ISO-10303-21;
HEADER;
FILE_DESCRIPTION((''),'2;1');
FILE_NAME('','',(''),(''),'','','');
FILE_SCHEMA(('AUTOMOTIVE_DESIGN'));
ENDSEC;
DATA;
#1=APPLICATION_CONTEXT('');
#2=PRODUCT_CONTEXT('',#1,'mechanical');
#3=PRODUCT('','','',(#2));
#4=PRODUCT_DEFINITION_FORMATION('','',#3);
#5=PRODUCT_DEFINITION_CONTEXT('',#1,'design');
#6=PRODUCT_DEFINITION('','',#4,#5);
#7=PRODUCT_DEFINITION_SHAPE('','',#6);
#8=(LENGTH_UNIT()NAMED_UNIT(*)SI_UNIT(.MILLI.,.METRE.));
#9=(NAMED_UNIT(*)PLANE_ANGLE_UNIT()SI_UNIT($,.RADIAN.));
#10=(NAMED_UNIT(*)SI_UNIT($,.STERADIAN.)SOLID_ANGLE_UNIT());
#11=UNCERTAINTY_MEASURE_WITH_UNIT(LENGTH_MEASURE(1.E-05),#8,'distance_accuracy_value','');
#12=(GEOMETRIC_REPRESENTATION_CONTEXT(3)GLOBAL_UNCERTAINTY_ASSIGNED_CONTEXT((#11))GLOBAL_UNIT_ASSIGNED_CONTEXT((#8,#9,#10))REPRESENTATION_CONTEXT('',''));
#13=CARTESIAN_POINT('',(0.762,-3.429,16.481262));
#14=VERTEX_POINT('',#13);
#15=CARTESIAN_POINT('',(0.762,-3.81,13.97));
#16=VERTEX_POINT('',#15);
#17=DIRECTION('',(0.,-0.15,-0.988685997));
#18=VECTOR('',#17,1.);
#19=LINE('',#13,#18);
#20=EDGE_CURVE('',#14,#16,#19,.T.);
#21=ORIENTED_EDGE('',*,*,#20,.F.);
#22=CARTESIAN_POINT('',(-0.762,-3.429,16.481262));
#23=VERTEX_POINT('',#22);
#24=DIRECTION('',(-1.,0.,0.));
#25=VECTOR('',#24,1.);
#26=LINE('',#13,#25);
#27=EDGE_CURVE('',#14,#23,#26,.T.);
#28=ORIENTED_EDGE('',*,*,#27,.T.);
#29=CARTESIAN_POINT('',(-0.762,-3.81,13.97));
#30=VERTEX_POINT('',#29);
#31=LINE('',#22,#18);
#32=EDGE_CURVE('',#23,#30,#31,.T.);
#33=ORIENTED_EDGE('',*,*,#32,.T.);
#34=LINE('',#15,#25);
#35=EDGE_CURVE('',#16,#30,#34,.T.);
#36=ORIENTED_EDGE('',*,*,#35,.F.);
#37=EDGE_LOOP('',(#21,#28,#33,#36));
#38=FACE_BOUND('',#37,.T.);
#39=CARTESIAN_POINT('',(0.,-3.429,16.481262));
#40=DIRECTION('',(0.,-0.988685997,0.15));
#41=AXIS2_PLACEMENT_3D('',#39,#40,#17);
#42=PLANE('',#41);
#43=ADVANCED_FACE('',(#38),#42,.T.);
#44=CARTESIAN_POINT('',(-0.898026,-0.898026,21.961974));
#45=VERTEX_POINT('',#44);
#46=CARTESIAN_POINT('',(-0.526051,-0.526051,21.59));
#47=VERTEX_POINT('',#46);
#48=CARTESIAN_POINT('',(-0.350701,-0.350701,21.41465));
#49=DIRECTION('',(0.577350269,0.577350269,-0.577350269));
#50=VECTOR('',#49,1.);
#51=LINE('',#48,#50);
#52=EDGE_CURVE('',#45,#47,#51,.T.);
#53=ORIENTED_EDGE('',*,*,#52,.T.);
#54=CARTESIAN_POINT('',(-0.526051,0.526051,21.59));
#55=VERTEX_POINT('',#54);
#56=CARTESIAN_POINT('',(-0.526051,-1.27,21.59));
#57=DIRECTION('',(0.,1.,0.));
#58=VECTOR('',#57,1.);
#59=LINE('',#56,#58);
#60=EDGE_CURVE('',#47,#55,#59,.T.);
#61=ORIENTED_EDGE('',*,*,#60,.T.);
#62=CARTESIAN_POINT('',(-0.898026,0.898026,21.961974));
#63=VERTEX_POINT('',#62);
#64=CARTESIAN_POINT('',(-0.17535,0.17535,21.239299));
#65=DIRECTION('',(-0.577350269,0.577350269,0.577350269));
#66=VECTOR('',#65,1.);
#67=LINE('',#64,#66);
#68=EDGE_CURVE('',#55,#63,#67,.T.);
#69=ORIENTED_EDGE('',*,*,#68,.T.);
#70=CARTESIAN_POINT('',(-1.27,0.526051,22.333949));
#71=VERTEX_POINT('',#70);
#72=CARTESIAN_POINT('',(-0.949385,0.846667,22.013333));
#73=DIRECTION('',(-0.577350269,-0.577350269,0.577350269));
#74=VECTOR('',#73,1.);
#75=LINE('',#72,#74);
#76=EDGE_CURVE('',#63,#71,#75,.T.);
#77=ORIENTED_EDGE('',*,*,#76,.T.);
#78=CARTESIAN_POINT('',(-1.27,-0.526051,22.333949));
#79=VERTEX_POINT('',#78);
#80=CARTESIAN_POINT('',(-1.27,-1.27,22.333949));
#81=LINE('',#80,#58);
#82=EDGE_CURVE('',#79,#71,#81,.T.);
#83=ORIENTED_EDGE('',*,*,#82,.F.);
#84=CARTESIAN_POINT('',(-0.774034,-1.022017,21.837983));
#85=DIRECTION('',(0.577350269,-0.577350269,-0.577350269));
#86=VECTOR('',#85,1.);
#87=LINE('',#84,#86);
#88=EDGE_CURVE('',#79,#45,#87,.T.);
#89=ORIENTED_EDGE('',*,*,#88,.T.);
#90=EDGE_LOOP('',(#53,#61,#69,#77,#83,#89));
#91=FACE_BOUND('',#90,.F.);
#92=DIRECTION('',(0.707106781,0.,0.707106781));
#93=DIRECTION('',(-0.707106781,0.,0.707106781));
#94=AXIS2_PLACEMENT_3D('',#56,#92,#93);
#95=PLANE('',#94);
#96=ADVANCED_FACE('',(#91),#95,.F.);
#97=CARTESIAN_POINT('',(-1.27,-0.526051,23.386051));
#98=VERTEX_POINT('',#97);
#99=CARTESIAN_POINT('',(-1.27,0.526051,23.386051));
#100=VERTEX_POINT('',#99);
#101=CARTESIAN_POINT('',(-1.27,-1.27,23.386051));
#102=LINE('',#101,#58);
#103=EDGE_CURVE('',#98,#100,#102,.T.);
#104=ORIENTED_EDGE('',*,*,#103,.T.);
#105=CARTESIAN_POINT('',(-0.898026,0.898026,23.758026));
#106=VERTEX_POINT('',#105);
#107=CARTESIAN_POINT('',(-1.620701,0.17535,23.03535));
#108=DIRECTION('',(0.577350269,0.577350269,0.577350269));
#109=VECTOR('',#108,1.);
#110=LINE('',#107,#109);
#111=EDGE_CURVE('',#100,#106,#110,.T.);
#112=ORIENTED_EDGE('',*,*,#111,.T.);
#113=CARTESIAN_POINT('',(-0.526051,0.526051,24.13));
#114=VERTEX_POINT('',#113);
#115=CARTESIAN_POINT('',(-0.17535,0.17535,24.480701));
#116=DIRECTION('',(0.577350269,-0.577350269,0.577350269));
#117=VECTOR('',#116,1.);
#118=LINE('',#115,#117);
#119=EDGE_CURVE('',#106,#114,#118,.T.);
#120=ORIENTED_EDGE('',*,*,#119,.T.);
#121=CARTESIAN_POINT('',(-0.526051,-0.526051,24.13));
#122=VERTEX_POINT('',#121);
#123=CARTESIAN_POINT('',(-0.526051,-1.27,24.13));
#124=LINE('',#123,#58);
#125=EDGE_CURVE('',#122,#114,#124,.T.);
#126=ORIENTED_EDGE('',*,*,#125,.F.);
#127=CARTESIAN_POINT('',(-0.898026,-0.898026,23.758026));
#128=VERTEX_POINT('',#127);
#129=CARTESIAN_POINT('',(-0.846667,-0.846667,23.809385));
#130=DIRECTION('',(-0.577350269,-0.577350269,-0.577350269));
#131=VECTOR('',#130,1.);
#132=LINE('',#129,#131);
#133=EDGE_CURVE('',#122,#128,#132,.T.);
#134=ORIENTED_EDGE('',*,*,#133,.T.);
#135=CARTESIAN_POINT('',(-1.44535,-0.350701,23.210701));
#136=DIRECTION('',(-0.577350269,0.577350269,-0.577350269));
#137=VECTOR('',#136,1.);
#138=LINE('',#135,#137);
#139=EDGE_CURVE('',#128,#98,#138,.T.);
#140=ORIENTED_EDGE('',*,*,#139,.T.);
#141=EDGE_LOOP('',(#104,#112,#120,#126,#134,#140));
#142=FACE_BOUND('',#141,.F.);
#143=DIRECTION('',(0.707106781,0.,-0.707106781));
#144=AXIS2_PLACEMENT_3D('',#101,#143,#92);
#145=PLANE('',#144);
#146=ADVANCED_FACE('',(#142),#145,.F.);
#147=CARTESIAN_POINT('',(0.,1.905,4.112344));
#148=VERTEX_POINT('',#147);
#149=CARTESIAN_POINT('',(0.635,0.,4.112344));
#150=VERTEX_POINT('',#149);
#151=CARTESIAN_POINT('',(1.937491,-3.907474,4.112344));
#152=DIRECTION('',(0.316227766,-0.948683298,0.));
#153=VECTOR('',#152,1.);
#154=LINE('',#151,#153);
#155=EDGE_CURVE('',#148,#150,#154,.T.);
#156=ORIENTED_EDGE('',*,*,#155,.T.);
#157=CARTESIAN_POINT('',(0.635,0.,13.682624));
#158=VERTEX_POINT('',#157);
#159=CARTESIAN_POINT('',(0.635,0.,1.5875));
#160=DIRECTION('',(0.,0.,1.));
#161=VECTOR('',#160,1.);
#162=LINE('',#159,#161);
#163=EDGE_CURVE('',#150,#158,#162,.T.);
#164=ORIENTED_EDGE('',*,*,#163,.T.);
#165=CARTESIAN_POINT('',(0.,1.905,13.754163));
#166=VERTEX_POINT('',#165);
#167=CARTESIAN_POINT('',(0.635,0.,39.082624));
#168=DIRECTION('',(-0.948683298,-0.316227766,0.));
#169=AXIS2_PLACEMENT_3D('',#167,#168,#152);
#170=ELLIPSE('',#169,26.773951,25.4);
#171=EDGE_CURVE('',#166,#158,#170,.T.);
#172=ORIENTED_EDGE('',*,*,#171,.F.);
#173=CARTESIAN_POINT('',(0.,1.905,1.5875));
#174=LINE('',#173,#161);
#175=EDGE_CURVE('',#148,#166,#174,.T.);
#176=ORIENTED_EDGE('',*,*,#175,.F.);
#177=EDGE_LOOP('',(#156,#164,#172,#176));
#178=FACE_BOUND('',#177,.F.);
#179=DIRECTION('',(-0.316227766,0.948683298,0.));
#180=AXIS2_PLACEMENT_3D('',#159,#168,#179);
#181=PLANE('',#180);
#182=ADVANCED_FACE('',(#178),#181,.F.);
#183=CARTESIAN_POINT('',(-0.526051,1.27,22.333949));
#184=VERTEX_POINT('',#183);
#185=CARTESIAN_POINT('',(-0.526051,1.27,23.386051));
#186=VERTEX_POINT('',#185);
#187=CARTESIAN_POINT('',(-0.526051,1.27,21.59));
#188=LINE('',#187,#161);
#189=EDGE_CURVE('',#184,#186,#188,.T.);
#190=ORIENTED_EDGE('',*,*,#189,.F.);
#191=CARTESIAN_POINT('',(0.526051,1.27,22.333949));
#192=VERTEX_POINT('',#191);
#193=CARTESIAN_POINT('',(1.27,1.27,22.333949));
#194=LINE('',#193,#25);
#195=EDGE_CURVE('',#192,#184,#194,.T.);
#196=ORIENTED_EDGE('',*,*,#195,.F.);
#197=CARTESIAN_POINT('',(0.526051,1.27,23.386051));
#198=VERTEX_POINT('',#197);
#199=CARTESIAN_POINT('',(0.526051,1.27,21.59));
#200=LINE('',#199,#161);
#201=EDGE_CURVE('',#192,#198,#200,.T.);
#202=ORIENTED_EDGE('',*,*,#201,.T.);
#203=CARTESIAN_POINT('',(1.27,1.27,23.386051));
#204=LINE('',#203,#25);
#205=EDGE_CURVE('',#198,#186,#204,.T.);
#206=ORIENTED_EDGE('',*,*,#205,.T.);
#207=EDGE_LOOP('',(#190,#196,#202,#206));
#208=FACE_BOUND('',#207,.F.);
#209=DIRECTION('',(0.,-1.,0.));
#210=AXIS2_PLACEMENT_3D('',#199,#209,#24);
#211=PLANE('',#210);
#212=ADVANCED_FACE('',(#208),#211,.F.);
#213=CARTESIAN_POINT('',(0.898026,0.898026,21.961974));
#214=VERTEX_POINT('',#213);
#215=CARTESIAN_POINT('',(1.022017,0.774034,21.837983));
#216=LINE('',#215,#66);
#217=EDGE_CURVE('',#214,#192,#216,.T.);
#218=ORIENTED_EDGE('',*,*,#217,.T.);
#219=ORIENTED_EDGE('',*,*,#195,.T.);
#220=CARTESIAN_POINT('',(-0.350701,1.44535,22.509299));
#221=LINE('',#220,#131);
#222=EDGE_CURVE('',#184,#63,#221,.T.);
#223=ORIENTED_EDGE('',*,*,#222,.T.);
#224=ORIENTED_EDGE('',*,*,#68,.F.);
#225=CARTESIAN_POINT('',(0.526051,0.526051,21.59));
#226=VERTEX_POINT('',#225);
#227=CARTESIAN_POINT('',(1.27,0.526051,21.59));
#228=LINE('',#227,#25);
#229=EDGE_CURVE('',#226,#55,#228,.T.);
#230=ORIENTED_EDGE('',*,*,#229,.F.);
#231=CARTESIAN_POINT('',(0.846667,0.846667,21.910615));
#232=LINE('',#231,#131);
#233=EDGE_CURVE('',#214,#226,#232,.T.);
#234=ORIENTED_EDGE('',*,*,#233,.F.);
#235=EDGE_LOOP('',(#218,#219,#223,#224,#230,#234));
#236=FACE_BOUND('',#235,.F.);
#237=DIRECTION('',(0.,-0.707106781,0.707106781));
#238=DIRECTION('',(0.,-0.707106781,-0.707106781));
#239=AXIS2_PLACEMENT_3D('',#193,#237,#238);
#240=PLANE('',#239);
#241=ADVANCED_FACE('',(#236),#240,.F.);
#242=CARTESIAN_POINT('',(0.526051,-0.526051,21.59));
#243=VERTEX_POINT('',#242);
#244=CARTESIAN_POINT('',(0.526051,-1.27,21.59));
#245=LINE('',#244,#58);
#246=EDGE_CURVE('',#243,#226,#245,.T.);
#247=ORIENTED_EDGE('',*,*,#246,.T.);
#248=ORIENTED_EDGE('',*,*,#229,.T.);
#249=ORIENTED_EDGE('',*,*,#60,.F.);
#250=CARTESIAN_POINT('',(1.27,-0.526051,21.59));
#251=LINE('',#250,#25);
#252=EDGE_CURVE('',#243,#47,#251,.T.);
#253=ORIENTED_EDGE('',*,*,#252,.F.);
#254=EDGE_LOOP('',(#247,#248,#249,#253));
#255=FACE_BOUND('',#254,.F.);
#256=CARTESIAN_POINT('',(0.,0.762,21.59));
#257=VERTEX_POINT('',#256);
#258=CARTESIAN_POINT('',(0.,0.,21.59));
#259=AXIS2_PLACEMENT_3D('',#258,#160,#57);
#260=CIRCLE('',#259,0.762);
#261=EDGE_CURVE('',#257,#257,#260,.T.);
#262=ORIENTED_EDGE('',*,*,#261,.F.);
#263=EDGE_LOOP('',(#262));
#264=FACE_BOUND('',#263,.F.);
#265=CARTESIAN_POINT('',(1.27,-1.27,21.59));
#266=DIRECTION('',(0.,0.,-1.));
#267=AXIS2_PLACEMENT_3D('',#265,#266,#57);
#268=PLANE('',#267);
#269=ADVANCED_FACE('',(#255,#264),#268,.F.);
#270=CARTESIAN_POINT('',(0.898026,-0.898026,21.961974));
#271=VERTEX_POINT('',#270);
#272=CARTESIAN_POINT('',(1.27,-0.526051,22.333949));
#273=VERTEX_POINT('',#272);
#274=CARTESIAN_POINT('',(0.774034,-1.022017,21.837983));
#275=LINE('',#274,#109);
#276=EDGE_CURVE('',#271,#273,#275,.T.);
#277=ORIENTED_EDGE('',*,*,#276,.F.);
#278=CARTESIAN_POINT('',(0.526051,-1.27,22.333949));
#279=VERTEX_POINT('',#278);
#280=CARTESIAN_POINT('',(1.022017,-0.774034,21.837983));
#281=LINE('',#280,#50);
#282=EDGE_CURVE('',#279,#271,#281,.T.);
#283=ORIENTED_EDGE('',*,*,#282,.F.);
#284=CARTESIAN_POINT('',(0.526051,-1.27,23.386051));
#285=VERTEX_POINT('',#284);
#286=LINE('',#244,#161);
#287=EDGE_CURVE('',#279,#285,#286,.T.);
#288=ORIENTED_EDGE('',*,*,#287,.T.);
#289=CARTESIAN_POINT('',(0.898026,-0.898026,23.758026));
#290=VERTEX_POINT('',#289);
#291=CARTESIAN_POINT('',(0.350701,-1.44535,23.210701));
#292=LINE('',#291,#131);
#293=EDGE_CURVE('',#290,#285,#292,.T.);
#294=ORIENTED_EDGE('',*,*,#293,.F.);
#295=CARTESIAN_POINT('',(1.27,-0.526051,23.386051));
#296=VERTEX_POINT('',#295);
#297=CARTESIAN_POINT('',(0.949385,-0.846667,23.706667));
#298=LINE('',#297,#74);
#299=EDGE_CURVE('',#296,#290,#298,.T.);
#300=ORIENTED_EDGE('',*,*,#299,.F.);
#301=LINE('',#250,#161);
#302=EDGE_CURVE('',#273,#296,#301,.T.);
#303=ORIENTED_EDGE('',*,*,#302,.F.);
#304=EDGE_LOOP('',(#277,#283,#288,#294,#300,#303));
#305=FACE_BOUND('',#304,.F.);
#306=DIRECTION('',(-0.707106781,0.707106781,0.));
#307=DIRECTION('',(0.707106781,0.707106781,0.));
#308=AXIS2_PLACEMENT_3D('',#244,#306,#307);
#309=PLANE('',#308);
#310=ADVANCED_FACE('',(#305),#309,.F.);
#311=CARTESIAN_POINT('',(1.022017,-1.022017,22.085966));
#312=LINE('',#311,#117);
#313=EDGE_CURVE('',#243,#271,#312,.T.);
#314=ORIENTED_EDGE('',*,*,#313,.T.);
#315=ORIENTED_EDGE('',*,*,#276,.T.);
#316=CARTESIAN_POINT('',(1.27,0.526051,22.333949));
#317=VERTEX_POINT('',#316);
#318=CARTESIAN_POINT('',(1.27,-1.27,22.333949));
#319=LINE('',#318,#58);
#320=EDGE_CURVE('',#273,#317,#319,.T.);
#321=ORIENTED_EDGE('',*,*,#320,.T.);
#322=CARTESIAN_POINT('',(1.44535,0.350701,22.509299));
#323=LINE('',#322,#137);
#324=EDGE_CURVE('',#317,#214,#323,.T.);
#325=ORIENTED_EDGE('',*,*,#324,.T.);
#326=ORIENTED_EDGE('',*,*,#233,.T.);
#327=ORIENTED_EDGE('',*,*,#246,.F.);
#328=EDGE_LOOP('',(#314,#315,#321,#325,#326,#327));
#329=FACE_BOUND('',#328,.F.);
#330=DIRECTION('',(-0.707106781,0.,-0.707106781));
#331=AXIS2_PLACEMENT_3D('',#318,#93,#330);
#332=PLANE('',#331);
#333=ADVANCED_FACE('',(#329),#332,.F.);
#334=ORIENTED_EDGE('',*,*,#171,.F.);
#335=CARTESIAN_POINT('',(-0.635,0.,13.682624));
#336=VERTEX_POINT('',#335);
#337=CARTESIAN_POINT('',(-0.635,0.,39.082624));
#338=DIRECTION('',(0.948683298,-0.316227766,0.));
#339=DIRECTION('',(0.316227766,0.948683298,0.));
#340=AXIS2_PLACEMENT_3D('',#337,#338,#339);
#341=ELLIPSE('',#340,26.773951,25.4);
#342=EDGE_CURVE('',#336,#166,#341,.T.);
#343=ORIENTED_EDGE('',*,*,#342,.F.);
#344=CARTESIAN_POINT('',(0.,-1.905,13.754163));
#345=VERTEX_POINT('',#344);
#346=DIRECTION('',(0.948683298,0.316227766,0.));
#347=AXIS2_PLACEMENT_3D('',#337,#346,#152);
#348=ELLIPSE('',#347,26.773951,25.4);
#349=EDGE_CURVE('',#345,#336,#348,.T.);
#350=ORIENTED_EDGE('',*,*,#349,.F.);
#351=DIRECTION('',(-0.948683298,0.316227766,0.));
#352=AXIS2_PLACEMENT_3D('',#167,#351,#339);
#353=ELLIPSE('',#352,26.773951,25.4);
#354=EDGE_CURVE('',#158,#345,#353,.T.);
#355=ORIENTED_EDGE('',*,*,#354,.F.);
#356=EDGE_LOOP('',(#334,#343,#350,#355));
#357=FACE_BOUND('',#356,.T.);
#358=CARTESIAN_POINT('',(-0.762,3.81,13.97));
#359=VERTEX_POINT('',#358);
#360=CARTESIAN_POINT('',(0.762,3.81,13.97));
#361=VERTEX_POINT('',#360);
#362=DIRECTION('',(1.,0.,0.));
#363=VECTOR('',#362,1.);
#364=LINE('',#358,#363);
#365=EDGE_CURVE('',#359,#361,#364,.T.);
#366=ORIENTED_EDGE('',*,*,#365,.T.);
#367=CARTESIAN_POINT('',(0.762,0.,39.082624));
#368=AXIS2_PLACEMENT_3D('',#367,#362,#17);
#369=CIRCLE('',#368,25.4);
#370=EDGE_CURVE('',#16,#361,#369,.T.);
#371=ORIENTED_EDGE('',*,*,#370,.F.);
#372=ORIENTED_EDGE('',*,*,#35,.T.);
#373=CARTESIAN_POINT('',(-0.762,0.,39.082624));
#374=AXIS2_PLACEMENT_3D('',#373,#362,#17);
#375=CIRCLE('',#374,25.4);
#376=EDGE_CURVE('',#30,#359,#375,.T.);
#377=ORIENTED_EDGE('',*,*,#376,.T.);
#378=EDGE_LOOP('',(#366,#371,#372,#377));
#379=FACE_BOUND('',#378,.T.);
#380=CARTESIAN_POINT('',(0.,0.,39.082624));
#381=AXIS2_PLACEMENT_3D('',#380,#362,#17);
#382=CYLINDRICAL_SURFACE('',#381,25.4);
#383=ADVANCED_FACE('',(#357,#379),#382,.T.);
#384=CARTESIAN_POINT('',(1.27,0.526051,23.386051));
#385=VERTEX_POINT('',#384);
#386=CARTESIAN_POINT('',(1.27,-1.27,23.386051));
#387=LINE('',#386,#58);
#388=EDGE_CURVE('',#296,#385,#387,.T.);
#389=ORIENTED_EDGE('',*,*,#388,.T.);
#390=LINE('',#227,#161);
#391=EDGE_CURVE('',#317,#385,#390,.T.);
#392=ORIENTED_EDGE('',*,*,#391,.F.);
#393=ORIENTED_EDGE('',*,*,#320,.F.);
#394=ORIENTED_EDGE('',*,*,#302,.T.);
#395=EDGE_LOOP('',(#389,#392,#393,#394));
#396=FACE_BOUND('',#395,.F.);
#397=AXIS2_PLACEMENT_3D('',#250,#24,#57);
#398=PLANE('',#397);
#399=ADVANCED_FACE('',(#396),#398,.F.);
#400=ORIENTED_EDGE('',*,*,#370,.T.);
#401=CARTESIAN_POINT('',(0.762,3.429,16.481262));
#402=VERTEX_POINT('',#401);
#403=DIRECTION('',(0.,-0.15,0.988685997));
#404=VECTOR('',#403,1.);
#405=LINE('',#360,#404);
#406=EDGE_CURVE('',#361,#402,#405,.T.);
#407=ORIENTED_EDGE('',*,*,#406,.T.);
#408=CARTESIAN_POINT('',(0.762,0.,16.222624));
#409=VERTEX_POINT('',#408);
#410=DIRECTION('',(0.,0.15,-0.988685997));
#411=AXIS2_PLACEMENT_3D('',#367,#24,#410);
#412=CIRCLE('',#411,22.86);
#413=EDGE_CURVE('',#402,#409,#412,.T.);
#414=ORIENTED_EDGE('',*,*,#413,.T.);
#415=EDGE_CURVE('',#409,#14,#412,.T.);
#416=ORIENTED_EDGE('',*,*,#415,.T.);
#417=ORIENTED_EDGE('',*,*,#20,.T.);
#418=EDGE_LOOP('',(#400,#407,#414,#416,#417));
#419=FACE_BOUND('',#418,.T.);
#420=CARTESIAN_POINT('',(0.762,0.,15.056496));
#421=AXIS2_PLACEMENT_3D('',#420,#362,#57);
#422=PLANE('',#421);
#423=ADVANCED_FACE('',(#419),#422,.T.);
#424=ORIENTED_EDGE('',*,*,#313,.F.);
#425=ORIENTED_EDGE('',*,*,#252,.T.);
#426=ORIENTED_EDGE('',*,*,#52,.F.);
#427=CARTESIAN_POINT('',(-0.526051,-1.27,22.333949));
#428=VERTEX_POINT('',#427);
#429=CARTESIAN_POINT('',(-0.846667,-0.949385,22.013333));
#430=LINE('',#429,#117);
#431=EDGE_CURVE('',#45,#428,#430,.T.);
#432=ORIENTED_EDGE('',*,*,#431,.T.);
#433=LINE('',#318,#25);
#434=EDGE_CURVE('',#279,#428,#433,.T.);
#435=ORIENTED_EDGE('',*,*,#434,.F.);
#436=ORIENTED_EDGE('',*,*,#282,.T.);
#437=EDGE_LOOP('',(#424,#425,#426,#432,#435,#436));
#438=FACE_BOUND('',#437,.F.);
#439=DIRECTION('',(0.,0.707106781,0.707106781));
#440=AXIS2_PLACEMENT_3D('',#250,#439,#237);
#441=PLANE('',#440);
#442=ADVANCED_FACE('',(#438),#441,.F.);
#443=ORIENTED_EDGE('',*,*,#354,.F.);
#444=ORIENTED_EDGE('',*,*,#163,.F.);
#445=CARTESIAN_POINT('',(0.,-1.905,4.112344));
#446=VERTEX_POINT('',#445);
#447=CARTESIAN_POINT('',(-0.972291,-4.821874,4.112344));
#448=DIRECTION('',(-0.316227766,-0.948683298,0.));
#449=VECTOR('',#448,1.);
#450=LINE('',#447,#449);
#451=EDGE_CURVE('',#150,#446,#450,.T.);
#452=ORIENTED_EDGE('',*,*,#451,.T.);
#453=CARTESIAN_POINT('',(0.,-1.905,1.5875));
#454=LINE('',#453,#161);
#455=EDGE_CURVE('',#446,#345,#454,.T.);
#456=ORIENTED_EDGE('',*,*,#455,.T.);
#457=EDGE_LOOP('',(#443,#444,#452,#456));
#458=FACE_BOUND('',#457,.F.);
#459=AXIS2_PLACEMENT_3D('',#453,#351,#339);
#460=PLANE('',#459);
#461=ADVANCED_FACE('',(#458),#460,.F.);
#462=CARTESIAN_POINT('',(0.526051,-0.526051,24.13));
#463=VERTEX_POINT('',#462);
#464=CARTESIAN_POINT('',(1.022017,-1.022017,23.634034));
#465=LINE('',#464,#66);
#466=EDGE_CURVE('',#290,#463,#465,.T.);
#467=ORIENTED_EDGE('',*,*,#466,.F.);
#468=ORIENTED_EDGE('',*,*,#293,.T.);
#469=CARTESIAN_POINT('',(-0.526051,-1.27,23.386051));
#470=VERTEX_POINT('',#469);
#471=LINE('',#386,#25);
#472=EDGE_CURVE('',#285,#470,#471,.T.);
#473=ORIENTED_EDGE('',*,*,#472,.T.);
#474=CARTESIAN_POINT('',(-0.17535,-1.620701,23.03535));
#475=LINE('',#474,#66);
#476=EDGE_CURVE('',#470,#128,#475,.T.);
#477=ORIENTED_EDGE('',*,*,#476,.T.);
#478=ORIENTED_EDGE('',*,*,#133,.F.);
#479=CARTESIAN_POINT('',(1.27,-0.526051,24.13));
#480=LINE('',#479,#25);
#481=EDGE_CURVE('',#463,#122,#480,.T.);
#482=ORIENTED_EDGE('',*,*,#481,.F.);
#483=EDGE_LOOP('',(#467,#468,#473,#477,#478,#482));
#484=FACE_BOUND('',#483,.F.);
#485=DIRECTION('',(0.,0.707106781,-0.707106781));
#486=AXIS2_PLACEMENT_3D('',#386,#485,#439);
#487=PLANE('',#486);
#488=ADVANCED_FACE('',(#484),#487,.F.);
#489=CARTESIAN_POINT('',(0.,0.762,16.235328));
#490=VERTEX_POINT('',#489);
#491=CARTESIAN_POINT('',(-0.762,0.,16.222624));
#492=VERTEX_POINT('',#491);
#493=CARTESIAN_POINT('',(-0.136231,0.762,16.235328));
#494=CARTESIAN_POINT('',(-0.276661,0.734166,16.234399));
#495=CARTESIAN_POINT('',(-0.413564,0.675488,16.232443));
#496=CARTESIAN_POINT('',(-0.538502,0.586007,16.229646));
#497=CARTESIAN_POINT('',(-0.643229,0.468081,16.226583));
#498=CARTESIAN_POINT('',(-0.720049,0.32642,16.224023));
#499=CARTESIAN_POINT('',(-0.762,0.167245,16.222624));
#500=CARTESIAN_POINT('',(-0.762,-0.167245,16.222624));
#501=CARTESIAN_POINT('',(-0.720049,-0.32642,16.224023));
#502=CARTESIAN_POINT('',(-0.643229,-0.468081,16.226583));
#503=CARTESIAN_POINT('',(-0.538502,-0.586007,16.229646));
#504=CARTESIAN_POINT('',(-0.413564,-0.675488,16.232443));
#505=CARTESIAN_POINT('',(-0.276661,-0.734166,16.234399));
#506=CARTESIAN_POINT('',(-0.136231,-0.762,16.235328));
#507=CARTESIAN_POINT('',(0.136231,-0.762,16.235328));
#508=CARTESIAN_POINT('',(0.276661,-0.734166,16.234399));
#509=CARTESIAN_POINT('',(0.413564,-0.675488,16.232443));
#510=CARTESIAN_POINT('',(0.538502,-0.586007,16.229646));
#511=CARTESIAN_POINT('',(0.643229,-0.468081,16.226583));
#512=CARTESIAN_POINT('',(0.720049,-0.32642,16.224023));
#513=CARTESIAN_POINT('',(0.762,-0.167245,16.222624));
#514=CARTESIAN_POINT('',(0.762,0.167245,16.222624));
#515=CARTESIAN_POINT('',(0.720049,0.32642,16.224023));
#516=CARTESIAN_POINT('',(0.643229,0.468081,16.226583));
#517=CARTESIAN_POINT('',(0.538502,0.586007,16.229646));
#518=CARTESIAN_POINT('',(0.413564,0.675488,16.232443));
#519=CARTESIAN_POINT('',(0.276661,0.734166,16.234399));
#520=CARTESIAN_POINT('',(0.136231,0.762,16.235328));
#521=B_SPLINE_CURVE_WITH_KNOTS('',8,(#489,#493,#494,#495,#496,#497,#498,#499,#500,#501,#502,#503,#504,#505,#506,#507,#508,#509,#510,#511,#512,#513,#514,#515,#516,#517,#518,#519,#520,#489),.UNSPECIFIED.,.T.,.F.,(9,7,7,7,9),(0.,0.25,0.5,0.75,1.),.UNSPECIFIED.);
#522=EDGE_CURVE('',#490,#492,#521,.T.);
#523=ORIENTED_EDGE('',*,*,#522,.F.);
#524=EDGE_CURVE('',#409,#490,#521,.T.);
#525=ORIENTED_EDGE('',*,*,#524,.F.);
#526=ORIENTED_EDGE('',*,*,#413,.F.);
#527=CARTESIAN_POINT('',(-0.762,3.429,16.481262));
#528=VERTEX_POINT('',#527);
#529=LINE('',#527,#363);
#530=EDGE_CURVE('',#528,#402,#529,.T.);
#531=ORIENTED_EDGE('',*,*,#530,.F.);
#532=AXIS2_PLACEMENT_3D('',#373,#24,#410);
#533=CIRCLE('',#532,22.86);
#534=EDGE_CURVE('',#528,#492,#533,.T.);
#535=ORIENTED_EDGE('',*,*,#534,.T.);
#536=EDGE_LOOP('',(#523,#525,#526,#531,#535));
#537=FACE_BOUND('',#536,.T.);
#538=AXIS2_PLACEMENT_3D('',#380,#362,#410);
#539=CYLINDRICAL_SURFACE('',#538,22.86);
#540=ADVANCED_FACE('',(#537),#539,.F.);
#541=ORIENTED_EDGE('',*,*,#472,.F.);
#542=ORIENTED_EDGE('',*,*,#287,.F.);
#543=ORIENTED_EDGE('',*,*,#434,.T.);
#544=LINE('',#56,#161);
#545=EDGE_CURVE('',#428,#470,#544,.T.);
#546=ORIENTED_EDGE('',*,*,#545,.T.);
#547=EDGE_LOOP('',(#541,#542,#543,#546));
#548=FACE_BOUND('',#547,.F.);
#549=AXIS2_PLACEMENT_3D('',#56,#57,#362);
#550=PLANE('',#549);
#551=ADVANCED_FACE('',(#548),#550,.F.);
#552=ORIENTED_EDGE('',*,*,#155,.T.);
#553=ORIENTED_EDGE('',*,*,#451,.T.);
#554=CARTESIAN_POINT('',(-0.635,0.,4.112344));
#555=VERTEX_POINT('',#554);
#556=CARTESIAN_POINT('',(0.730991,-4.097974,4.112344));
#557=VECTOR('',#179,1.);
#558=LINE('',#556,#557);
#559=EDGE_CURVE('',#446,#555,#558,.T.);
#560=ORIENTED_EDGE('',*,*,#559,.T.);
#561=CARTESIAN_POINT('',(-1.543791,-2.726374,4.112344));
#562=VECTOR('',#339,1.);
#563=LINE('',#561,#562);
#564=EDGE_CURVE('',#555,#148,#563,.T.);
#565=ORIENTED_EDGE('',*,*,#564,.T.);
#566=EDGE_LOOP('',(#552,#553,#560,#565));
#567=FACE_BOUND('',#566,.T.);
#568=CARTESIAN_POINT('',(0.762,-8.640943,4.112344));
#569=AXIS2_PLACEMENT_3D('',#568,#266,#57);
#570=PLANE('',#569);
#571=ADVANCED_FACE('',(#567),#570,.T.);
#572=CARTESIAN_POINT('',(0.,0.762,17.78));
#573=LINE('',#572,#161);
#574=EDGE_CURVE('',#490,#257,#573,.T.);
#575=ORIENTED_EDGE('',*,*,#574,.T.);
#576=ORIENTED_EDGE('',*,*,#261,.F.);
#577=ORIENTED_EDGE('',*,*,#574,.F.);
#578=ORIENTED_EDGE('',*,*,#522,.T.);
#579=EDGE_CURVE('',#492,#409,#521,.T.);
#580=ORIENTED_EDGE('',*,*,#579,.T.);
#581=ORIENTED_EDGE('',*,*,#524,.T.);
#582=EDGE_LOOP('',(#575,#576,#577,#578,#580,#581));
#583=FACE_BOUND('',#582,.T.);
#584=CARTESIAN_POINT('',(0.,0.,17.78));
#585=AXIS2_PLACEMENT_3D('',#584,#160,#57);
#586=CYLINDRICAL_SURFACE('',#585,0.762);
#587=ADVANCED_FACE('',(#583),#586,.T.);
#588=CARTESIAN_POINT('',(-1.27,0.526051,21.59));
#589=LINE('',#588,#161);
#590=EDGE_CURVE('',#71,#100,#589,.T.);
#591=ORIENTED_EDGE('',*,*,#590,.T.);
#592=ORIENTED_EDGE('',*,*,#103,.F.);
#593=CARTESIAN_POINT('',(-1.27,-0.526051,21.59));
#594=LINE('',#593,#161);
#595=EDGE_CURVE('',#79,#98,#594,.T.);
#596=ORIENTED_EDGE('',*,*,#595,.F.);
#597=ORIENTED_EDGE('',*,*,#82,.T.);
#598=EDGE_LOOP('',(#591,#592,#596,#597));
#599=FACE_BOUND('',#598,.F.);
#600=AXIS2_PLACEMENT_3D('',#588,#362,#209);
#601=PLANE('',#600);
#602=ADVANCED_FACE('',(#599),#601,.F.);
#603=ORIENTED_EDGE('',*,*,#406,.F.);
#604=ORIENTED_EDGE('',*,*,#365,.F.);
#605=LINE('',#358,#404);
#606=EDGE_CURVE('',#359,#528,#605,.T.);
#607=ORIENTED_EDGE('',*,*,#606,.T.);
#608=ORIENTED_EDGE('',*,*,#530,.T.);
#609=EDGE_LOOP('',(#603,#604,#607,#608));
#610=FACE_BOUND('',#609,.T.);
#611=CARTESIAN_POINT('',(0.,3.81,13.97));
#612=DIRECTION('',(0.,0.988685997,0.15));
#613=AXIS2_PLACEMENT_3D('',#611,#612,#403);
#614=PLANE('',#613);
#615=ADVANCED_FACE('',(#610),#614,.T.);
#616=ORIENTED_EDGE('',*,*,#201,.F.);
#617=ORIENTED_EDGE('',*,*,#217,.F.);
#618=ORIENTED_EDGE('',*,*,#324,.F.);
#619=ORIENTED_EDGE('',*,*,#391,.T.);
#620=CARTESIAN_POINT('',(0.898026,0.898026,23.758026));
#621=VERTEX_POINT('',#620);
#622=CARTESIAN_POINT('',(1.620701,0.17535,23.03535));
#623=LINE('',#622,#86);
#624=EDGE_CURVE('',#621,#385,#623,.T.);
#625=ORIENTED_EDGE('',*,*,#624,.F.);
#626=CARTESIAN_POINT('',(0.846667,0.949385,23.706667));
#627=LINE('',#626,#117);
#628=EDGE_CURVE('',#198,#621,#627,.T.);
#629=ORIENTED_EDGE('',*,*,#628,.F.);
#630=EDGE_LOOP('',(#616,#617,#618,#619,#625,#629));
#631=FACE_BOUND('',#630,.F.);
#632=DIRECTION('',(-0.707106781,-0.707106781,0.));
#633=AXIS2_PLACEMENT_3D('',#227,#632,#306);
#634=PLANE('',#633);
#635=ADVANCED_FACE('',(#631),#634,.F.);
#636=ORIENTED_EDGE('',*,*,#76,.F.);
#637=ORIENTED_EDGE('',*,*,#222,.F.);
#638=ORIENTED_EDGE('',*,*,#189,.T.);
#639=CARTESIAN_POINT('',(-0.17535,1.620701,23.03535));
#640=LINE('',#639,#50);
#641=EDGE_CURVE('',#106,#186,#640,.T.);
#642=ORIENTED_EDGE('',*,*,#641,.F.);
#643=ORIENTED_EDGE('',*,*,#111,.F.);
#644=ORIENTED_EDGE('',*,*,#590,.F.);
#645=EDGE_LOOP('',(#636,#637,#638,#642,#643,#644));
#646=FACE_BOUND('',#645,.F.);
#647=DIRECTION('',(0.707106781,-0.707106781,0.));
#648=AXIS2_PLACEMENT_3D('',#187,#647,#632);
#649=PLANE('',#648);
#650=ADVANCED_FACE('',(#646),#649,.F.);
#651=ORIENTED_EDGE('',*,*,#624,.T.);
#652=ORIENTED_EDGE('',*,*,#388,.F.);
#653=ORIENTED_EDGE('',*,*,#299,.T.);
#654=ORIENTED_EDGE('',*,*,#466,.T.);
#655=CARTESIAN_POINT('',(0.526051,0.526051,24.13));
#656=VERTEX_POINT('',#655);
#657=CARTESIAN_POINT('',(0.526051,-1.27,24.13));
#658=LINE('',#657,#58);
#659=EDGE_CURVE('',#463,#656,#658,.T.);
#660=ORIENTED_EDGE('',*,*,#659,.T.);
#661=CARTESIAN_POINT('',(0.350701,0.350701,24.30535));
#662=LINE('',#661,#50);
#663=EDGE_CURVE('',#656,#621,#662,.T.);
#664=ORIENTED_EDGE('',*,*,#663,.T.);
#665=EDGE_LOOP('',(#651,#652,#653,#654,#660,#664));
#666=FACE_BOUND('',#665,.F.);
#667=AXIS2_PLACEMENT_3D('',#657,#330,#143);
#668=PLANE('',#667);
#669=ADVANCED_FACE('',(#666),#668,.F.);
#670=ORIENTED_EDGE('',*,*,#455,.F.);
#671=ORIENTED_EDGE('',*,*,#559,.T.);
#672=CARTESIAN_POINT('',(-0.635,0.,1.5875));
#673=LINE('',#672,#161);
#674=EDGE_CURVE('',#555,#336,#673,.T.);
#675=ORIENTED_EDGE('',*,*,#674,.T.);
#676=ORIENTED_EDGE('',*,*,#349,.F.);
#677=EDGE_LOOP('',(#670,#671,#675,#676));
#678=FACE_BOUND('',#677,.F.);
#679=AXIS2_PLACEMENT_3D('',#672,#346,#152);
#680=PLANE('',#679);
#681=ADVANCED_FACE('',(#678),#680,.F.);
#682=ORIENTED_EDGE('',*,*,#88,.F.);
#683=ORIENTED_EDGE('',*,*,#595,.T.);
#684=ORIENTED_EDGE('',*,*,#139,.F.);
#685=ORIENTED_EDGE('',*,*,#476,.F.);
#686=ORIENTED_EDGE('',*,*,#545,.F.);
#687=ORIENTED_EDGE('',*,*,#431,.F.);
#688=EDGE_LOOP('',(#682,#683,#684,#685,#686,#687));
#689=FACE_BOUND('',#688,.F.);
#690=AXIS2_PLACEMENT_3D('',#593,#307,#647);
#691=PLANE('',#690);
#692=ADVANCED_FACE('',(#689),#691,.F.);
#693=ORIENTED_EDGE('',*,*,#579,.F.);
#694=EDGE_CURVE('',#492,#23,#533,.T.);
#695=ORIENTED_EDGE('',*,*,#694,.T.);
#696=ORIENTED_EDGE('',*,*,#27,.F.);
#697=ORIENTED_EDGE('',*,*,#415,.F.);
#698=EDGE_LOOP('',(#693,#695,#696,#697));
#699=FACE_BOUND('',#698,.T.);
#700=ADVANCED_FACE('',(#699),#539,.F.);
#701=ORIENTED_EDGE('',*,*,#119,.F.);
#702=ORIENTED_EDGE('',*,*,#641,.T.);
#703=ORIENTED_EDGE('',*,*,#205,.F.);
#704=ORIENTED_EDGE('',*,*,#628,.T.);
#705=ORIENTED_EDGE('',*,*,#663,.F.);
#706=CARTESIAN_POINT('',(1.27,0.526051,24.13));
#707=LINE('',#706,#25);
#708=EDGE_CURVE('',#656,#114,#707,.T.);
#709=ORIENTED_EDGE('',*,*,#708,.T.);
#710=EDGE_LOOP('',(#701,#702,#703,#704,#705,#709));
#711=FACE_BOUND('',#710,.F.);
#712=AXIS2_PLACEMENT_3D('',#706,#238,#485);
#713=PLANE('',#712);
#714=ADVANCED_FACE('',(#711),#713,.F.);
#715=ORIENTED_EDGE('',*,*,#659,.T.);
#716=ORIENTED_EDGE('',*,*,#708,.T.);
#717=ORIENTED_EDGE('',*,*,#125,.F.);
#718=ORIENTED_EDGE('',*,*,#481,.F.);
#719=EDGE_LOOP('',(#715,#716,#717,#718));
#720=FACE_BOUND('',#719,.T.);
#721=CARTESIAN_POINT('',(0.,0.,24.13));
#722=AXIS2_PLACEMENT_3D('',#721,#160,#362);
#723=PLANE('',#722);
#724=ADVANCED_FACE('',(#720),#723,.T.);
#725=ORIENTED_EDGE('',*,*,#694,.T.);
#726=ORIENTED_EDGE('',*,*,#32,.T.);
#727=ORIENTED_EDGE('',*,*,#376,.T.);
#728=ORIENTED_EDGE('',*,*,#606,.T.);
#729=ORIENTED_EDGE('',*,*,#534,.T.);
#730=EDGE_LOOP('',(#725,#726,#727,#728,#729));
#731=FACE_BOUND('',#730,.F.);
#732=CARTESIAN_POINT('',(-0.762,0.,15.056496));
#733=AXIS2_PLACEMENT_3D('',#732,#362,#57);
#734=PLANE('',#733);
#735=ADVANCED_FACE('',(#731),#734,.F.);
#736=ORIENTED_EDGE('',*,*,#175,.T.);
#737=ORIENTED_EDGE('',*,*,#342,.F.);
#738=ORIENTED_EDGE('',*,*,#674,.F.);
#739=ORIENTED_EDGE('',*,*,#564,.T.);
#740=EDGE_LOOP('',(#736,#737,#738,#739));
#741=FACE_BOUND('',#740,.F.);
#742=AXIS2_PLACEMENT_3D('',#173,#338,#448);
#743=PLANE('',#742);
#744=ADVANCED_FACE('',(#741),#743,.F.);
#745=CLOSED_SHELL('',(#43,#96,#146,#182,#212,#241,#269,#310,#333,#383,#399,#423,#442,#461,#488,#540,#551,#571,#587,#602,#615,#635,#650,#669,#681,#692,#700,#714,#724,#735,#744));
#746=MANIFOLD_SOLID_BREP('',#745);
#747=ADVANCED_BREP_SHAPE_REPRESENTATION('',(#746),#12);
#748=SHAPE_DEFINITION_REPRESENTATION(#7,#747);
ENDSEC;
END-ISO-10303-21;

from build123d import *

# Parameters (mm, degrees)
F0_R      = 6.35
F1_DEPTH  = 1.5875
F2_R      = 6.35
F2_R_2    = 5.715
F3_DEPTH  = 0.79375
F5_DEPTH  = 12.7
F7_DEPTH  = 0.762
F8_W      = 0.762
F8_H      = 7.62
F11_DEPTH = 2.54
F13_DEPTH = 25.4
F15_DEPTH = 7.621
F16_W     = 24.9132402241
F16_H     = 7.0053068921
F17_DEPTH = 12.7


# Not quite as in the source:
# - a feature names something its author has since deleted; it is built from what else it names


with BuildPart() as f1:
    # F0 (on Top) → F1 (new body)
    with BuildSketch(Plane.XY):
        Circle(F0_R)
    extrude(amount=F1_DEPTH)

    # F2 (on face) → F3 (join)
    with BuildSketch(Plane.XY.offset(1.5875)):
        Circle(F2_R)
        Circle(F2_R_2, mode=Mode.SUBTRACT)
        with BuildLine():
            add(Edge.make_bspline(
                [(2.9683180619, -0.4757996358), (2.843389073, -0.4786165828), (2.7050840949, -0.5086647904), (2.5873180619, -0.5161623703)],
                knots=[0.409339872, 0.409339872, 0.409339872, 0.409339872, 0.4280905329, 0.4280905329, 0.4280905329, 0.4280905329], degree=3))
            add(Edge.make_bspline(
                [(2.5873180619, -0.5161623703), (2.4915986751, -0.5222563495), (2.3352190965, -0.5054979102), (2.1335509903, -0.5700528844), (1.886210527, -0.6696578597), (1.7267290127, -0.8313152566), (1.6781527788, -1.0212940602), (1.5990320903, -1.1897273451), (1.6464089719, -1.2957044031), (1.5599711629, -1.4279363767), (1.5051186748, -1.5717824942), (1.450980873, -1.6442395094), (1.453928646, -1.7165163565), (1.513053832, -1.7807591134), (1.5434308822, -1.8303185726), (1.576198943, -1.9162350186), (1.5055990352, -1.9919946196), (1.4668165836, -2.0222182295), (1.4097694676, -2.0618705924), (1.4071401198, -2.0762813928), (1.407019912, -2.0936682429), (1.4054410858, -2.1159814671), (1.4256709316, -2.1343567811), (1.4482180902, -2.1520382899), (1.5329915239, -2.3033090939), (1.6303822196, -2.3814989965), (1.5935632797, -2.4623744081), (1.5348318369, -2.4983128964), (1.4776982069, -2.5441298885), (1.455742429, -2.5511454253), (1.4798178263, -2.5621456444), (1.4948688399, -2.5838079134), (1.5251861888, -2.6046329809), (1.4935773749, -2.6345303194), (1.4713860455, -2.6758526458), (1.4221955197, -2.712885243), (1.3936565716, -2.7915463541), (1.4945229102, -2.8204202545), (1.6288484983, -2.8640100665), (1.7728549214, -2.853346582), (1.9116412442, -2.8061555548), (2.0472725737, -2.770170597), (2.2043787565, -2.7459265468), (2.3033355203, -2.7551939211), (2.3339263508, -2.8073911697), (2.353376687, -2.8775353249), (2.3257401171, -2.9468505336), (2.3037614678, -3.0393999235), (2.1498886548, -3.0666616669), (2.0714102198, -3.0904863786), (1.9727168734, -3.1134789891), (1.7843150368, -3.140535518), (1.6436061221, -3.1389483141), (1.5234236482, -3.1049579495), (1.4521295971, -3.0857303745), (1.4124230671, -3.1305535957), (1.4949213438, -3.1891776378), (1.5227733168, -3.2831967132), (1.4841449535, -3.3566867509), (1.4775180681, -3.4518910587), (1.4608440665, -3.566216612), (1.549729833, -3.6446920788), (1.8994677395, -3.667719288), (2.0536618712, -3.5673701183), (2.086254186, -3.5448411945)],
                knots=[0.4280905329, 0.4280905329, 0.4280905329, 0.4280905329, 0.4433309355, 0.457101701, 0.472691433, 0.4868290747, 0.5002944463, 0.5129981027, 0.5225928523, 0.5342722129, 0.5463608736, 0.5552384945, 0.5629095325, 0.5716491532, 0.5791344546, 0.5877870081, 0.596979654, 0.6042024841, 0.6118646332, 0.6153039035, 0.6192184677, 0.6236552276, 0.6283160232, 0.6333712575, 0.6459326281, 0.6564149698, 0.6642919572, 0.6725026939, 0.6807518007, 0.684185616, 0.6882292359, 0.6934969149, 0.6985507014, 0.7041050254, 0.7107743014, 0.7183805652, 0.7259377484, 0.7347425449, 0.7463542944, 0.7577985049, 0.7693099164, 0.780784325, 0.7929687375, 0.8020678672, 0.8090716285, 0.8170400104, 0.8252507415, 0.834055538, 0.845515778, 0.8543322878, 0.8638427207, 0.8770648317, 0.8886457092, 0.899333178, 0.9072373981, 0.9129559403, 0.9218532611, 0.9311181429, 0.9395692705, 0.9490169241, 0.9588418554, 0.9683094215, 0.9861710617, 1, 1, 1, 1], degree=3))
            add(Edge.make_bspline(
                [(2.086254186, -3.5448411945), (2.1011047055, -3.5345760071), (2.1201833918, -3.5199789546), (2.2133903471, -3.4742318908), (2.3333214203, -3.4513666992), (2.4607568415, -3.4062321353), (2.6387662736, -3.3641035898), (2.7563669715, -3.3392389367), (2.8861628847, -3.3278317932), (2.9202917573, -3.1985664964), (2.9487510475, -3.0806210272), (2.9453740986, -2.8830592898), (2.9475003966, -2.7801627945), (3.0024526725, -2.634440086), (3.0665778639, -2.4862895949), (3.1278419801, -2.4963691695), (3.2148748542, -2.5174044884), (3.2670738053, -2.6357726537), (3.300079047, -2.7251932385), (3.4018745991, -2.7381242004), (3.5380519165, -2.7491446387), (3.665083714, -2.6861808801), (3.7982425029, -2.6394629665), (3.9059135519, -2.5530868531), (4.0451426633, -2.4694400612), (4.1647565761, -2.2912192854), (4.2419872332, -2.1073390896), (4.3180155802, -1.9393229235), (4.3188699133, -1.6520894893), (4.249875342, -1.4134518517), (4.1905089106, -1.1973159772), (4.0374858266, -0.958444693), (3.8993633614, -0.7738144821), (3.5856153955, -0.5701629325), (3.286341595, -0.5131462763), (3.0825055806, -0.4732248916), (2.9683180619, -0.4757996358)],
                knots=[0, 0, 0, 0, 0.0063010841, 0.0157194351, 0.0263949763, 0.0376453369, 0.0505479911, 0.0613137498, 0.071480671, 0.0817330319, 0.0926649823, 0.1059401058, 0.1157236868, 0.1278653869, 0.1394743491, 0.1461226676, 0.1548216508, 0.1655548739, 0.1745318922, 0.1836808664, 0.1948523405, 0.2062053504, 0.2175283386, 0.2286731355, 0.2407902953, 0.2547394428, 0.2682405406, 0.2811697816, 0.2972000982, 0.3123569589, 0.3266907485, 0.3425591711, 0.3572627122, 0.3754272219, 0.3922014044, 0.409339872, 0.409339872, 0.409339872, 0.409339872], degree=3))
        make_face()
        with BuildLine():
            add(Edge.make_bspline(
                [(1.6971518053, -1.7743168864), (1.6817021758, -1.7925924294), (1.6769970047, -1.8625052871), (1.729693431, -1.9463010045), (1.7845566819, -2.0039238946), (1.7796195304, -2.0789246327), (1.7537680377, -2.1257688745), (1.8014879536, -2.2093126279), (1.9177102455, -2.1779080217), (1.965096075, -2.0707704095), (1.9605129281, -1.9856512165), (1.9580791022, -1.8944092615), (1.8839995072, -1.8212095405), (1.8202543113, -1.7813944492), (1.7573140981, -1.749016499), (1.7102858438, -1.7587804824), (1.6971518053, -1.7743168864)],
                knots=[0, 0, 0, 0, 0.0723902032, 0.1521785163, 0.2220894047, 0.2876074386, 0.3444825904, 0.4130481958, 0.4920977039, 0.5756332962, 0.6493011321, 0.723443126, 0.8024927151, 0.8724037498, 0.9384596426, 1, 1, 1, 1], degree=3))
        make_face(mode=Mode.SUBTRACT)
        with BuildLine():
            add(Edge.make_bspline(
                [(-2.4699478998, -0.4572949838), (-2.5708650863, -0.4563367572), (-2.7369839982, -0.4424518124), (-2.9380629804, -0.5061475005), (-3.1861355879, -0.6061766595), (-3.3454329941, -0.7677273894), (-3.3940542763, -0.9577322927), (-3.4731643105, -1.1261594047), (-3.4257896257, -1.2321377355), (-3.5122267839, -1.364369332), (-3.5670794532, -1.5082155546), (-3.6212172198, -1.5806725493), (-3.6182694543, -1.6529494008), (-3.5591442662, -1.7171921565), (-3.5287672166, -1.766751616), (-3.4959991555, -1.8526680619), (-3.5665990634, -1.9284276629), (-3.605381515, -1.9586512728), (-3.662428631, -1.9983036357), (-3.6650579788, -2.0127144361), (-3.6651781866, -2.0301012863), (-3.6667570128, -2.0524145104), (-3.646527167, -2.0707898244), (-3.6239800084, -2.0884713333), (-3.5392065747, -2.2397421372), (-3.441815879, -2.3179320399), (-3.4786348188, -2.3988074514), (-3.5373662617, -2.4347459398), (-3.5944998917, -2.4805629318), (-3.6164556696, -2.4875784687), (-3.5923802723, -2.4985786877), (-3.5773292587, -2.5202409567), (-3.5470119098, -2.5410660242), (-3.5786207237, -2.5709633628), (-3.600812053, -2.6122856891), (-3.6500025789, -2.6493182863), (-3.678541527, -2.7279793974), (-3.5776751884, -2.7568532979), (-3.4433496003, -2.8004431099), (-3.2993431772, -2.7897796254), (-3.1605568544, -2.7425885981), (-3.0249255249, -2.7066036403), (-2.8678193421, -2.6823595901), (-2.7688625783, -2.6916269644), (-2.7382717478, -2.743824213), (-2.7188214116, -2.8139683683), (-2.7464579815, -2.8832835769), (-2.7684366308, -2.9758329669), (-2.9223094438, -3.0030947102), (-3.0007878788, -3.026919422), (-3.0994812252, -3.0499120324), (-3.2878830618, -3.0769685613), (-3.4285919765, -3.0753813574), (-3.5487744504, -3.0413909928), (-3.6200685015, -3.0221634179), (-3.6597750314, -3.066986639), (-3.5772767548, -3.1256106812), (-3.5494247818, -3.2196297565), (-3.5880531451, -3.2931197942), (-3.5946800305, -3.388324102), (-3.6113540321, -3.5026496554), (-3.5224682656, -3.5811251221), (-3.1727303591, -3.6041523313), (-3.0185362274, -3.5038031616), (-2.9859439126, -3.4812742379)],
                knots=[0.4276093612, 0.4276093612, 0.4276093612, 0.4276093612, 0.4432926757, 0.4570643878, 0.4726551912, 0.4867938046, 0.5002601016, 0.5129646311, 0.5225600402, 0.5342402035, 0.5463296951, 0.5552079262, 0.5628794914, 0.5716197128, 0.5791055286, 0.5877586768, 0.5969519545, 0.604175281, 0.6118379567, 0.6152774634, 0.6191922967, 0.6236293616, 0.6282904775, 0.6333460592, 0.6459082931, 0.6563913553, 0.6642688841, 0.6724801851, 0.6807298588, 0.6841639101, 0.688207808, 0.693475849, 0.6985299829, 0.7040846887, 0.710754423, 0.7183612095, 0.7259189122, 0.7347243139, 0.7463368614, 0.7577818585, 0.7692940611, 0.7807692583, 0.7929545082, 0.8020542633, 0.809058506, 0.8170274356, 0.825238731, 0.8340441327, 0.8455051603, 0.8543222761, 0.8638333627, 0.8770563824, 0.8886380559, 0.8993262592, 0.9072310226, 0.9129499578, 0.9218478901, 0.9311134087, 0.9395651171, 0.9490134201, 0.9588390266, 0.9683072434, 0.9861701112, 1, 1, 1, 1], degree=3))
            add(Edge.make_bspline(
                [(-2.9859439126, -3.4812742379), (-2.9710933931, -3.4710090504), (-2.9520147068, -3.456411998), (-2.8588077515, -3.4106649341), (-2.7388766783, -3.3877997425), (-2.6114412571, -3.3426651787), (-2.433431825, -3.3005366331), (-2.3158311271, -3.27567198), (-2.1860352139, -3.2642648366), (-2.1519063413, -3.1349995397), (-2.1234470511, -3.0170540705), (-2.1268239999, -2.8194923331), (-2.1246977019, -2.7165958378), (-2.0697454261, -2.5708731293), (-2.0056202347, -2.4227226382), (-1.9443561185, -2.4328022129), (-1.8573232444, -2.4538375317), (-1.8051242933, -2.5722056971), (-1.7721190516, -2.6616262819), (-1.6703234995, -2.6745572438), (-1.5341461821, -2.685577682), (-1.4071143845, -2.6226139237), (-1.2739555958, -2.5758960088), (-1.1662845461, -2.4895199003), (-1.0270554378, -2.4058730873), (-0.9074415115, -2.2276524028), (-0.830210904, -2.0437718725), (-0.7541823669, -1.8757569873), (-0.753328888, -1.5885177996), (-0.8223203653, -1.3499010029), (-0.8816979637, -1.1336899083), (-1.0346766678, -0.8951175642), (-1.1729684536, -0.7093468208), (-1.4859704608, -0.5107200004), (-1.7852685997, -0.4361256058), (-1.9796795123, -0.4407184694), (-2.0889478998, -0.4452950088)],
                knots=[0, 0, 0, 0, 0.0063015172, 0.0157205155, 0.0263967904, 0.0376479243, 0.0505514652, 0.0613179639, 0.0714855839, 0.0817386494, 0.0926713511, 0.1059473871, 0.1157316405, 0.1278741751, 0.1394839351, 0.1461327105, 0.1548322917, 0.1655662524, 0.1745438878, 0.1836934908, 0.1948657327, 0.2062195229, 0.2175432893, 0.2286888521, 0.2408068447, 0.254756951, 0.2682589767, 0.2811891063, 0.2972205247, 0.3123784271, 0.3267132019, 0.3425827151, 0.3572872668, 0.3754530249, 0.3922283603, 0.4089050235, 0.4089050235, 0.4089050235, 0.4089050235], degree=3))
            add(Edge.make_bspline(
                [(-2.0889478998, -0.4452950088), (-2.2115019627, -0.4504279985), (-2.3495913807, -0.4584377902), (-2.4699478998, -0.4572949838)],
                knots=[0.4089050235, 0.4089050235, 0.4089050235, 0.4089050235, 0.4276093612, 0.4276093612, 0.4276093612, 0.4276093612], degree=3))
        make_face()
        with BuildLine():
            add(Edge.make_bspline(
                [(-3.3750462933, -1.7107499298), (-3.3904959228, -1.7290254728), (-3.3952010939, -1.7989383304), (-3.3425046676, -1.8827340479), (-3.2876414167, -1.940356938), (-3.2925785682, -2.015357676), (-3.3184300609, -2.0622019178), (-3.270710145, -2.1457456712), (-3.1544878531, -2.114341065), (-3.1071020236, -2.0072034528), (-3.1116851705, -1.9220842599), (-3.1141189964, -1.8308423049), (-3.1881985914, -1.7576425838), (-3.2519437873, -1.7178274925), (-3.3148840005, -1.6854495423), (-3.3619122548, -1.6952135257), (-3.3750462933, -1.7107499298)],
                knots=[0, 0, 0, 0, 0.0723902032, 0.1521785163, 0.2220894047, 0.2876074386, 0.3444825904, 0.4130481958, 0.4920977039, 0.5756332962, 0.6493011321, 0.723443126, 0.8024927151, 0.8724037498, 0.9384596426, 1, 1, 1, 1], degree=3))
        make_face(mode=Mode.SUBTRACT)
        with BuildLine():
            add(Edge.make_bspline(
                [(-2.0889478998, -0.4452950088), (-2.2115019627, -0.4504279985), (-2.3495913807, -0.4584377902), (-2.4699478998, -0.4572949838)],
                knots=[0.4089050235, 0.4089050235, 0.4089050235, 0.4089050235, 0.4276093612, 0.4276093612, 0.4276093612, 0.4276093612], degree=3))
            Line((-2.0889478998, -0.4452950088), (-2.0889478998, 3.3454788989))
            Line((-2.0889478998, 3.3454788989), (2.5873180619, 3.3454788989))
            Line((2.5873180619, 3.3454788989), (2.5873180619, -0.5161623703))
            add(Edge.make_bspline(
                [(2.9683180619, -0.4757996358), (2.843389073, -0.4786165828), (2.7050840949, -0.5086647904), (2.5873180619, -0.5161623703)],
                knots=[0.409339872, 0.409339872, 0.409339872, 0.409339872, 0.4280905329, 0.4280905329, 0.4280905329, 0.4280905329], degree=3))
            Line((2.9683180619, -0.4757996358), (2.9683180619, 3.7264788989))
            Line((2.9683180619, 3.7264788989), (-2.4699478998, 3.7264788989))
            Line((-2.4699478998, 3.7264788989), (-2.4699478998, -0.4572949838))
        make_face()
        with BuildLine():
            Line((-3.550226207, -2.9001818039), (-3.550226207, -2.8240964748))
            ThreePointArc((-3.550226207, -2.8240964748), (-3.6131554429, -2.8177576011), (-3.6389924242, -2.8754873201))
            Line((-3.6389924242, -2.8754873201), (-3.550226207, -2.9001818039))
        make_face()
        with BuildLine():
            Line((-3.5515612579, -2.9365690425), (-3.6409947677, -2.9101930559))
            ThreePointArc((-3.6409947677, -2.9101930559), (-3.6144088936, -2.9743756743), (-3.550226207, -3.0009613838))
            Line((-3.550226207, -3.0009613838), (-3.5515612579, -2.9365690425))
        make_face()
        Polygon((-3.4440558991, -2.9486666899), (-3.5156634292, -2.9365690425), (-3.5175228148, -3.00363102), (-3.4440558991, -3.0129749794), align=None)
        Polygon((-3.443260084, -2.8461508919), (-3.5195409908, -2.832378028), (-3.5195409908, -2.903361572), (-3.443260084, -2.9181940481), align=None)
        Polygon((-3.3330767072, -2.8514482547), (-3.4114763728, -2.849329263), (-3.4114763728, -2.9171344358), (-3.3330767072, -2.920312807), align=None)
        Polygon((-3.3340308471, -3.0290670693), (-3.3340308471, -2.9517051298), (-3.4147564909, -2.9517051298), (-3.4147564909, -3.0172944535), align=None)
        Polygon((-3.2263969659, -3.028226085), (-3.2272379501, -2.9517051298), (-3.300395201, -2.9517051298), (-3.300395201, -3.028226085), align=None)
        Polygon((-3.2250125549, -2.8408537619), (-3.301292996, -2.849329263), (-3.301292996, -2.9192534275), (-3.2239527098, -2.9192534275), align=None)
        Polygon((-3.1221265561, -2.8121171053), (-3.195283807, -2.8314576484), (-3.195283807, -2.9155467637), (-3.1221265561, -2.8995696921), align=None)
        Polygon((-3.1212855718, -3.011408262), (-3.1204445875, -2.9365690425), (-3.1927613198, -2.9466596898), (-3.1919203355, -3.0214989092), align=None)
        Polygon((-3.005242779, -2.9836588074), (-3.0086062505, -2.9075582279), (-3.0876499257, -2.9239556752), (-3.0859684228, -3.0046810862), align=None)
        Polygon((-3.0060837633, -2.768390812), (-3.0859684228, -2.7952992823), (-3.0859684228, -2.8920017648), (-3.0060837633, -2.8692977503), align=None)
        Polygon((-2.9043358407, -2.7322324459), (-2.9766525729, -2.7549366932), (-2.9766525729, -2.859207103), (-2.9043358407, -2.8314576484), align=None)
        Polygon((-2.9758115886, -2.9744091444), (-2.9043358407, -2.9483414255), (-2.9043358407, -2.868456766), (-2.9758115886, -2.8920017648), align=None)
        with BuildLine():
            ThreePointArc((-2.8761449157, -2.9407734983), (-2.7976867204, -2.8913213797), (-2.7672707691, -2.8037081938))
            Line((-2.7672707691, -2.8037081938), (-2.8761449157, -2.8519913538))
            Line((-2.8761449157, -2.8519913538), (-2.8761449157, -2.9407734983))
        make_face()
        with BuildLine():
            ThreePointArc((-2.7748386963, -2.7717545163), (-2.8160666547, -2.7335813761), (-2.8715411789, -2.7246645186))
            Line((-2.8715411789, -2.7246645186), (-2.8715411789, -2.8146398254))
            Line((-2.8715411789, -2.8146398254), (-2.7748386963, -2.7717545163))
        make_face()
        with BuildLine():
            ThreePointArc((2.2973594023, -2.835321473), (2.2561314439, -2.7971483328), (2.2006569197, -2.7882314753))
            Line((2.2006569197, -2.7882314753), (2.2006569197, -2.878206782))
            Line((2.2006569197, -2.878206782), (2.2973594023, -2.835321473))
        make_face()
        with BuildLine():
            ThreePointArc((2.1960531829, -3.0043404549), (2.2745113782, -2.9548883364), (2.3049273295, -2.8672751505))
            Line((2.3049273295, -2.8672751505), (2.1960531829, -2.9155583104))
            Line((2.1960531829, -2.9155583104), (2.1960531829, -3.0043404549))
        make_face()
        Polygon((2.0963865099, -3.037976101), (2.1678622579, -3.0119083822), (2.1678622579, -2.9320237227), (2.0963865099, -2.9555687215), align=None)
        Polygon((2.1678622579, -2.7957994025), (2.0955455257, -2.8185036499), (2.0955455257, -2.9227740597), (2.1678622579, -2.8950246051), align=None)
        Polygon((2.0661143353, -2.8319577686), (1.9862296758, -2.858866239), (1.9862296758, -2.9555687215), (2.0661143353, -2.932864707), align=None)
        Polygon((2.0669553196, -3.047225764), (2.0635918481, -2.9711251846), (1.9845481729, -2.9875226319), (1.9862296758, -3.0682480428), align=None)
        Polygon((1.9509125268, -3.0749752186), (1.9517535111, -3.0001359992), (1.8794367788, -3.0102266464), (1.8802777631, -3.0850658659), align=None)
        Polygon((1.9500715425, -2.875684062), (1.8769142916, -2.8950246051), (1.8769142916, -2.9791137204), (1.9500715425, -2.9631366488), align=None)
        Polygon((1.8471855437, -2.9044207186), (1.7709051026, -2.9128962196), (1.7709051026, -2.9828203842), (1.8482453888, -2.9828203842), align=None)
        Polygon((1.8458011327, -3.0917930417), (1.8449601484, -3.0152720865), (1.7718028976, -3.0152720865), (1.7718028976, -3.0917930417), align=None)
        Polygon((1.7381672515, -3.092634026), (1.7381672515, -3.0152720865), (1.6574416077, -3.0152720865), (1.6574416077, -3.0808614101), align=None)
        Polygon((1.7391213914, -2.9150152113), (1.6607217258, -2.9128962196), (1.6607217258, -2.9807013925), (1.7391213914, -2.9838797636), align=None)
        Polygon((1.6289380146, -2.9097178485), (1.5526571078, -2.8959449846), (1.5526571078, -2.9669285286), (1.6289380146, -2.9817610048), align=None)
        Polygon((1.6281421995, -3.0122336466), (1.5565346694, -3.0001359992), (1.5546752838, -3.0671979766), (1.6281421995, -3.076541936), align=None)
        with BuildLine():
            Line((1.5206368407, -3.0001359992), (1.4312033309, -2.9737600125))
            ThreePointArc((1.4312033309, -2.9737600125), (1.457789205, -3.037942631), (1.5219718916, -3.0645283405))
            Line((1.5219718916, -3.0645283405), (1.5206368407, -3.0001359992))
        make_face()
        with BuildLine():
            Line((1.5219718916, -2.9637487605), (1.5219718916, -2.8876634315))
            ThreePointArc((1.5219718916, -2.8876634315), (1.4590426557, -2.8813245578), (1.4332056744, -2.9390542768))
            Line((1.4332056744, -2.9390542768), (1.5219718916, -2.9637487605))
        make_face()
    extrude(amount=F3_DEPTH)

    # F4 (on face) → F5 (join)
    with BuildSketch(Plane.XY.offset(1.5875)):
        Polygon((0.635, 0), (0, 1.905), (-0.635, 0), (0, -1.905), align=None)
    extrude(amount=F5_DEPTH)

    # F6 (on Right) → F7 (join, symmetric)
    with BuildSketch(Plane.YZ):
        with BuildLine():
            ThreePointArc((-3.81, 13.97), (0, 13.6826243153), (3.81, 13.97))
            Line((3.81, 13.97), (3.429, 16.4812624315))
            ThreePointArc((3.429, 16.4812624315), (0, 16.2226243153), (-3.429, 16.4812624315))
            Line((-3.429, 16.4812624315), (-3.81, 13.97))
        make_face()
    extrude(amount=F7_DEPTH, both=True)

    # F8 (on Right) → F9 (revolve)
    with BuildSketch(Plane.YZ):
        with Locations((0.381, 17.78)):
            Rectangle(F8_W, F8_H)
    revolve(axis=Axis((0, 0, 17.78), (0, 0, 1)))

    # F10 (on face) → F11 (join)
    with BuildSketch(Plane.XY.offset(21.59)):
        Polygon((-0.5260512242, -1.27), (0.5260512242, -1.27), (1.27, -0.5260512242), (1.27, 0.5260512242), (0.5260512242, 1.27), (-0.5260512242, 1.27), (-1.27, 0.5260512242), (-1.27, -0.5260512242), align=None)
    extrude(amount=F11_DEPTH)

    # F12 (on face) → F13 (cut)
    with BuildSketch(Plane.YZ.offset(1.27)):
        Polygon((1.27, 22.3339487758), (0.5260512242, 21.59), (1.27, 21.59), align=None)
        Polygon((-1.27, 21.59), (-0.5260512242, 21.59), (-1.27, 22.3339487758), align=None)
        Polygon((-1.27, 23.3860512242), (-0.5260512242, 24.13), (-1.27, 24.13), align=None)
        Polygon((1.27, 24.13), (0.5260512242, 24.13), (1.27, 23.3860512242), align=None)
    extrude(amount=-F13_DEPTH, mode=Mode.SUBTRACT)

    # F14 (on face) → F15 (cut, through all)
    with BuildSketch(Plane.XZ.offset(1.27)):
        Polygon((1.27, 21.59), (1.27, 22.3339487758), (0.5260512242, 21.59), align=None)
        Polygon((-1.27, 21.59), (-0.5260512242, 21.59), (-1.27, 22.3339487758), align=None)
        Polygon((-1.27, 23.3860512242), (-0.5260512242, 24.13), (-1.27, 24.13), align=None)
        Polygon((0.5260512242, 24.13), (1.27, 23.3860512242), (1.27, 24.13), align=None)
    extrude(amount=-F15_DEPTH, mode=Mode.SUBTRACT)

    # F16 (on face) → F17 (cut, symmetric)
    with BuildSketch(Plane.YZ.offset(0.762)):
        with Locations((3.815677017, 0.6096903235)):
            Rectangle(F16_W, F16_H)
    extrude(amount=F17_DEPTH, both=True, mode=Mode.SUBTRACT)


solid = f1.part
